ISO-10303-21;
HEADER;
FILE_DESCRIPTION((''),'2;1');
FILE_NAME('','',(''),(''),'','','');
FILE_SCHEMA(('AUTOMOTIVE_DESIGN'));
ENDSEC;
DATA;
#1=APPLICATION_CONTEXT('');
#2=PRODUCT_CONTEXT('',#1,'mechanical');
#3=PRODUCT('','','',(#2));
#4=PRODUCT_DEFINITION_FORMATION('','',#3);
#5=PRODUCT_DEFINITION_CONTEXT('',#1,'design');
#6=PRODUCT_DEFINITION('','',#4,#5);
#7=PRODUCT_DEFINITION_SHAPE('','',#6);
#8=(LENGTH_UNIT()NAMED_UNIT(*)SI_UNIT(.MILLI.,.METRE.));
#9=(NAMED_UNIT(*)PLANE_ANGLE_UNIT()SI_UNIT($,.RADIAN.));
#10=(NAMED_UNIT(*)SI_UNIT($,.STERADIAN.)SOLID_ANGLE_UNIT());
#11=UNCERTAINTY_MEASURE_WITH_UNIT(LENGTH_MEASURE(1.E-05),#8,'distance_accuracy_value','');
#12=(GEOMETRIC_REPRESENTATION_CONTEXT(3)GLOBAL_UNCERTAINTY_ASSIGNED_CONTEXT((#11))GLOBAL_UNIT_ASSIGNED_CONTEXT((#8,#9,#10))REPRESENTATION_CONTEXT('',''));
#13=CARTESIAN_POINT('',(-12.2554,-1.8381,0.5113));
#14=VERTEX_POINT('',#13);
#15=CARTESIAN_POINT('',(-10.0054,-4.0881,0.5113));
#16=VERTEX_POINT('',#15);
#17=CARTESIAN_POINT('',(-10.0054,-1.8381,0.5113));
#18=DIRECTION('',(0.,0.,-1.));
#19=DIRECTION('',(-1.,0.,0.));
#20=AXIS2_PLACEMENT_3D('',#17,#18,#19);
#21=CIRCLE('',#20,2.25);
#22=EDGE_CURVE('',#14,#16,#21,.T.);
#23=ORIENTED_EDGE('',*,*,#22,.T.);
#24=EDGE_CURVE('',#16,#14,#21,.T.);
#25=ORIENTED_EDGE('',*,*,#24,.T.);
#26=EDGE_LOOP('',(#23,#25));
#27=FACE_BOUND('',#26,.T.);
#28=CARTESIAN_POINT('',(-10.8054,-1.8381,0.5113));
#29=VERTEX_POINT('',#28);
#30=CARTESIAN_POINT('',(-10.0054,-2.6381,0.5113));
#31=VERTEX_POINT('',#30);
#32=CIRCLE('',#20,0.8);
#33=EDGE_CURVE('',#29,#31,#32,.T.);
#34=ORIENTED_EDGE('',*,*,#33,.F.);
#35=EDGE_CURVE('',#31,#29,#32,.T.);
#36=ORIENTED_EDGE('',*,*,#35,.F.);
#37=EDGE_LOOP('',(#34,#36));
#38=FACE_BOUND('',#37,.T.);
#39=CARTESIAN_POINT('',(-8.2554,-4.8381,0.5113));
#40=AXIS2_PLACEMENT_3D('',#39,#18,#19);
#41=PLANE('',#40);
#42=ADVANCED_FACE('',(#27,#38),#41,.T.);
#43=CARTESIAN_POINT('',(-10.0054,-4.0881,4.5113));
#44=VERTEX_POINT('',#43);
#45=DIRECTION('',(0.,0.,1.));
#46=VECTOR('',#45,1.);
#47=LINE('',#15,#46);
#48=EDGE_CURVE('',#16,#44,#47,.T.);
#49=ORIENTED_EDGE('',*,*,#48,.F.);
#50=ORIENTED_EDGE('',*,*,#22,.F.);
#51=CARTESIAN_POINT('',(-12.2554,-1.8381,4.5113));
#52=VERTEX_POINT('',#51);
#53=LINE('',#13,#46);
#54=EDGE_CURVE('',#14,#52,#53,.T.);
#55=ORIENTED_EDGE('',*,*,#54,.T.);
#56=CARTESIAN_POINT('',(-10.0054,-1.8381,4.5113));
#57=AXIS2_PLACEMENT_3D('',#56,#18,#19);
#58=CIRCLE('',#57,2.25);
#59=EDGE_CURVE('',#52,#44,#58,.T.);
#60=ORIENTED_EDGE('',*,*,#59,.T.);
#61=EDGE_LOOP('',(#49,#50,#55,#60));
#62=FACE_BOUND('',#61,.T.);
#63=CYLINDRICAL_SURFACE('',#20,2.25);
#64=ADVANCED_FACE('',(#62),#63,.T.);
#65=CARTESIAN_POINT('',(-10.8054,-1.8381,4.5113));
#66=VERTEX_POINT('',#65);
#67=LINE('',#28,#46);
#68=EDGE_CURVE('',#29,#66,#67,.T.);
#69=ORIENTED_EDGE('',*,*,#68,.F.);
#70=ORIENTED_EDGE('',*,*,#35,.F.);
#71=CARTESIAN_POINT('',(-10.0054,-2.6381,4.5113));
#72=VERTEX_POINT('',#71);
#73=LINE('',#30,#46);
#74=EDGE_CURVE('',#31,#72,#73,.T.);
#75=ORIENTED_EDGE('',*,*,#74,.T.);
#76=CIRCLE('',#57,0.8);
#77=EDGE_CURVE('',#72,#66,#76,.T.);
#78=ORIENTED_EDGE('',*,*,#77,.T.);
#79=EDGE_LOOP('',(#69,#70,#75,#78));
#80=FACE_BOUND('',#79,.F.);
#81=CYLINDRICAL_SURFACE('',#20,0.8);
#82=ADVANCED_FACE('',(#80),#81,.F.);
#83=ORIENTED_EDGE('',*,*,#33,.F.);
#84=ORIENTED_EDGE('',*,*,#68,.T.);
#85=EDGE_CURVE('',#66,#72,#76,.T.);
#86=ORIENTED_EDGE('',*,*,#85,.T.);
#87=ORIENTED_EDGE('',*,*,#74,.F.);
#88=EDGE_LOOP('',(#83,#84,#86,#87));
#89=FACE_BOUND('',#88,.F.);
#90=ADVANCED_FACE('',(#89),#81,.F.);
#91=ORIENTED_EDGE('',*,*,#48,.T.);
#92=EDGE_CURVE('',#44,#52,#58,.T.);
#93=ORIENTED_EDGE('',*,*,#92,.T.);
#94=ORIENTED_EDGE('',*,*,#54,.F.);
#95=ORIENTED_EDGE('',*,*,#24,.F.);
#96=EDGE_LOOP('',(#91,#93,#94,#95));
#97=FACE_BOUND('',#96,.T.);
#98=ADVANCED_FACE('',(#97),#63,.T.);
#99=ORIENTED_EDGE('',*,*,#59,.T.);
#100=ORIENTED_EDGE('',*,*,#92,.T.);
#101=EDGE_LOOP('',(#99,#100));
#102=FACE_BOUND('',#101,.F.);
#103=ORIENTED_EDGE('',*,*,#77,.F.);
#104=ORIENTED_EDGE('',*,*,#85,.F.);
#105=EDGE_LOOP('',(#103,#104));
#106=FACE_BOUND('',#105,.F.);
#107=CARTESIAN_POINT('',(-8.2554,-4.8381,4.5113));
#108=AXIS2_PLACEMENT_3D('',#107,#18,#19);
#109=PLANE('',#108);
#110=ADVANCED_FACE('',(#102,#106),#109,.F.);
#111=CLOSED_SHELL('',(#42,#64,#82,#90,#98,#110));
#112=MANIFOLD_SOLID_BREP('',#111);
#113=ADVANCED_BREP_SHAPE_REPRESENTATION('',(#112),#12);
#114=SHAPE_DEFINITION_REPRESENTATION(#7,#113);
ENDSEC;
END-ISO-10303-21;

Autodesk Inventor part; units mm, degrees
ref_plane "YZ Plane" through (0, 0, 0) normal (1, 0, 0) x (0, 1, 0)
ref_plane "XZ Plane" through (0, 0, 0) normal (0, 1, 0) x (-1, 0, 0)
ref_plane "XY Plane" through (0, 0, 0) normal (0, 0, 1) x (1, 0, 0)
ref_plane "Work Plane1" through (-8.2554, -4.8381, 0.5113) normal (0, 0, -1) x (-1, 0, 0)
sketch "Sketch1" plane through (-8.2554, -4.8381, 0.5113) normal (0, 0, -1) x (-1, 0, 0)
  line L0 (0, 0) -> (1.75, 0)
  line L1 (1.75, 0) -> (1.75, 3)
  circle A0 centre (1.75, 3) radius 0.8
  circle A1 centre (1.75, 3) radius 2.25
  point P0 (-8.2554, 4.8381)
  dimension "d0" = 1.75
  dimension "d1" = 3
  dimension "d2" = 1.6
  dimension "d3" = 4.5
extrude "Extrusion1" add sketch "Sketch1" against normal blind 4
properties part number "roller"
